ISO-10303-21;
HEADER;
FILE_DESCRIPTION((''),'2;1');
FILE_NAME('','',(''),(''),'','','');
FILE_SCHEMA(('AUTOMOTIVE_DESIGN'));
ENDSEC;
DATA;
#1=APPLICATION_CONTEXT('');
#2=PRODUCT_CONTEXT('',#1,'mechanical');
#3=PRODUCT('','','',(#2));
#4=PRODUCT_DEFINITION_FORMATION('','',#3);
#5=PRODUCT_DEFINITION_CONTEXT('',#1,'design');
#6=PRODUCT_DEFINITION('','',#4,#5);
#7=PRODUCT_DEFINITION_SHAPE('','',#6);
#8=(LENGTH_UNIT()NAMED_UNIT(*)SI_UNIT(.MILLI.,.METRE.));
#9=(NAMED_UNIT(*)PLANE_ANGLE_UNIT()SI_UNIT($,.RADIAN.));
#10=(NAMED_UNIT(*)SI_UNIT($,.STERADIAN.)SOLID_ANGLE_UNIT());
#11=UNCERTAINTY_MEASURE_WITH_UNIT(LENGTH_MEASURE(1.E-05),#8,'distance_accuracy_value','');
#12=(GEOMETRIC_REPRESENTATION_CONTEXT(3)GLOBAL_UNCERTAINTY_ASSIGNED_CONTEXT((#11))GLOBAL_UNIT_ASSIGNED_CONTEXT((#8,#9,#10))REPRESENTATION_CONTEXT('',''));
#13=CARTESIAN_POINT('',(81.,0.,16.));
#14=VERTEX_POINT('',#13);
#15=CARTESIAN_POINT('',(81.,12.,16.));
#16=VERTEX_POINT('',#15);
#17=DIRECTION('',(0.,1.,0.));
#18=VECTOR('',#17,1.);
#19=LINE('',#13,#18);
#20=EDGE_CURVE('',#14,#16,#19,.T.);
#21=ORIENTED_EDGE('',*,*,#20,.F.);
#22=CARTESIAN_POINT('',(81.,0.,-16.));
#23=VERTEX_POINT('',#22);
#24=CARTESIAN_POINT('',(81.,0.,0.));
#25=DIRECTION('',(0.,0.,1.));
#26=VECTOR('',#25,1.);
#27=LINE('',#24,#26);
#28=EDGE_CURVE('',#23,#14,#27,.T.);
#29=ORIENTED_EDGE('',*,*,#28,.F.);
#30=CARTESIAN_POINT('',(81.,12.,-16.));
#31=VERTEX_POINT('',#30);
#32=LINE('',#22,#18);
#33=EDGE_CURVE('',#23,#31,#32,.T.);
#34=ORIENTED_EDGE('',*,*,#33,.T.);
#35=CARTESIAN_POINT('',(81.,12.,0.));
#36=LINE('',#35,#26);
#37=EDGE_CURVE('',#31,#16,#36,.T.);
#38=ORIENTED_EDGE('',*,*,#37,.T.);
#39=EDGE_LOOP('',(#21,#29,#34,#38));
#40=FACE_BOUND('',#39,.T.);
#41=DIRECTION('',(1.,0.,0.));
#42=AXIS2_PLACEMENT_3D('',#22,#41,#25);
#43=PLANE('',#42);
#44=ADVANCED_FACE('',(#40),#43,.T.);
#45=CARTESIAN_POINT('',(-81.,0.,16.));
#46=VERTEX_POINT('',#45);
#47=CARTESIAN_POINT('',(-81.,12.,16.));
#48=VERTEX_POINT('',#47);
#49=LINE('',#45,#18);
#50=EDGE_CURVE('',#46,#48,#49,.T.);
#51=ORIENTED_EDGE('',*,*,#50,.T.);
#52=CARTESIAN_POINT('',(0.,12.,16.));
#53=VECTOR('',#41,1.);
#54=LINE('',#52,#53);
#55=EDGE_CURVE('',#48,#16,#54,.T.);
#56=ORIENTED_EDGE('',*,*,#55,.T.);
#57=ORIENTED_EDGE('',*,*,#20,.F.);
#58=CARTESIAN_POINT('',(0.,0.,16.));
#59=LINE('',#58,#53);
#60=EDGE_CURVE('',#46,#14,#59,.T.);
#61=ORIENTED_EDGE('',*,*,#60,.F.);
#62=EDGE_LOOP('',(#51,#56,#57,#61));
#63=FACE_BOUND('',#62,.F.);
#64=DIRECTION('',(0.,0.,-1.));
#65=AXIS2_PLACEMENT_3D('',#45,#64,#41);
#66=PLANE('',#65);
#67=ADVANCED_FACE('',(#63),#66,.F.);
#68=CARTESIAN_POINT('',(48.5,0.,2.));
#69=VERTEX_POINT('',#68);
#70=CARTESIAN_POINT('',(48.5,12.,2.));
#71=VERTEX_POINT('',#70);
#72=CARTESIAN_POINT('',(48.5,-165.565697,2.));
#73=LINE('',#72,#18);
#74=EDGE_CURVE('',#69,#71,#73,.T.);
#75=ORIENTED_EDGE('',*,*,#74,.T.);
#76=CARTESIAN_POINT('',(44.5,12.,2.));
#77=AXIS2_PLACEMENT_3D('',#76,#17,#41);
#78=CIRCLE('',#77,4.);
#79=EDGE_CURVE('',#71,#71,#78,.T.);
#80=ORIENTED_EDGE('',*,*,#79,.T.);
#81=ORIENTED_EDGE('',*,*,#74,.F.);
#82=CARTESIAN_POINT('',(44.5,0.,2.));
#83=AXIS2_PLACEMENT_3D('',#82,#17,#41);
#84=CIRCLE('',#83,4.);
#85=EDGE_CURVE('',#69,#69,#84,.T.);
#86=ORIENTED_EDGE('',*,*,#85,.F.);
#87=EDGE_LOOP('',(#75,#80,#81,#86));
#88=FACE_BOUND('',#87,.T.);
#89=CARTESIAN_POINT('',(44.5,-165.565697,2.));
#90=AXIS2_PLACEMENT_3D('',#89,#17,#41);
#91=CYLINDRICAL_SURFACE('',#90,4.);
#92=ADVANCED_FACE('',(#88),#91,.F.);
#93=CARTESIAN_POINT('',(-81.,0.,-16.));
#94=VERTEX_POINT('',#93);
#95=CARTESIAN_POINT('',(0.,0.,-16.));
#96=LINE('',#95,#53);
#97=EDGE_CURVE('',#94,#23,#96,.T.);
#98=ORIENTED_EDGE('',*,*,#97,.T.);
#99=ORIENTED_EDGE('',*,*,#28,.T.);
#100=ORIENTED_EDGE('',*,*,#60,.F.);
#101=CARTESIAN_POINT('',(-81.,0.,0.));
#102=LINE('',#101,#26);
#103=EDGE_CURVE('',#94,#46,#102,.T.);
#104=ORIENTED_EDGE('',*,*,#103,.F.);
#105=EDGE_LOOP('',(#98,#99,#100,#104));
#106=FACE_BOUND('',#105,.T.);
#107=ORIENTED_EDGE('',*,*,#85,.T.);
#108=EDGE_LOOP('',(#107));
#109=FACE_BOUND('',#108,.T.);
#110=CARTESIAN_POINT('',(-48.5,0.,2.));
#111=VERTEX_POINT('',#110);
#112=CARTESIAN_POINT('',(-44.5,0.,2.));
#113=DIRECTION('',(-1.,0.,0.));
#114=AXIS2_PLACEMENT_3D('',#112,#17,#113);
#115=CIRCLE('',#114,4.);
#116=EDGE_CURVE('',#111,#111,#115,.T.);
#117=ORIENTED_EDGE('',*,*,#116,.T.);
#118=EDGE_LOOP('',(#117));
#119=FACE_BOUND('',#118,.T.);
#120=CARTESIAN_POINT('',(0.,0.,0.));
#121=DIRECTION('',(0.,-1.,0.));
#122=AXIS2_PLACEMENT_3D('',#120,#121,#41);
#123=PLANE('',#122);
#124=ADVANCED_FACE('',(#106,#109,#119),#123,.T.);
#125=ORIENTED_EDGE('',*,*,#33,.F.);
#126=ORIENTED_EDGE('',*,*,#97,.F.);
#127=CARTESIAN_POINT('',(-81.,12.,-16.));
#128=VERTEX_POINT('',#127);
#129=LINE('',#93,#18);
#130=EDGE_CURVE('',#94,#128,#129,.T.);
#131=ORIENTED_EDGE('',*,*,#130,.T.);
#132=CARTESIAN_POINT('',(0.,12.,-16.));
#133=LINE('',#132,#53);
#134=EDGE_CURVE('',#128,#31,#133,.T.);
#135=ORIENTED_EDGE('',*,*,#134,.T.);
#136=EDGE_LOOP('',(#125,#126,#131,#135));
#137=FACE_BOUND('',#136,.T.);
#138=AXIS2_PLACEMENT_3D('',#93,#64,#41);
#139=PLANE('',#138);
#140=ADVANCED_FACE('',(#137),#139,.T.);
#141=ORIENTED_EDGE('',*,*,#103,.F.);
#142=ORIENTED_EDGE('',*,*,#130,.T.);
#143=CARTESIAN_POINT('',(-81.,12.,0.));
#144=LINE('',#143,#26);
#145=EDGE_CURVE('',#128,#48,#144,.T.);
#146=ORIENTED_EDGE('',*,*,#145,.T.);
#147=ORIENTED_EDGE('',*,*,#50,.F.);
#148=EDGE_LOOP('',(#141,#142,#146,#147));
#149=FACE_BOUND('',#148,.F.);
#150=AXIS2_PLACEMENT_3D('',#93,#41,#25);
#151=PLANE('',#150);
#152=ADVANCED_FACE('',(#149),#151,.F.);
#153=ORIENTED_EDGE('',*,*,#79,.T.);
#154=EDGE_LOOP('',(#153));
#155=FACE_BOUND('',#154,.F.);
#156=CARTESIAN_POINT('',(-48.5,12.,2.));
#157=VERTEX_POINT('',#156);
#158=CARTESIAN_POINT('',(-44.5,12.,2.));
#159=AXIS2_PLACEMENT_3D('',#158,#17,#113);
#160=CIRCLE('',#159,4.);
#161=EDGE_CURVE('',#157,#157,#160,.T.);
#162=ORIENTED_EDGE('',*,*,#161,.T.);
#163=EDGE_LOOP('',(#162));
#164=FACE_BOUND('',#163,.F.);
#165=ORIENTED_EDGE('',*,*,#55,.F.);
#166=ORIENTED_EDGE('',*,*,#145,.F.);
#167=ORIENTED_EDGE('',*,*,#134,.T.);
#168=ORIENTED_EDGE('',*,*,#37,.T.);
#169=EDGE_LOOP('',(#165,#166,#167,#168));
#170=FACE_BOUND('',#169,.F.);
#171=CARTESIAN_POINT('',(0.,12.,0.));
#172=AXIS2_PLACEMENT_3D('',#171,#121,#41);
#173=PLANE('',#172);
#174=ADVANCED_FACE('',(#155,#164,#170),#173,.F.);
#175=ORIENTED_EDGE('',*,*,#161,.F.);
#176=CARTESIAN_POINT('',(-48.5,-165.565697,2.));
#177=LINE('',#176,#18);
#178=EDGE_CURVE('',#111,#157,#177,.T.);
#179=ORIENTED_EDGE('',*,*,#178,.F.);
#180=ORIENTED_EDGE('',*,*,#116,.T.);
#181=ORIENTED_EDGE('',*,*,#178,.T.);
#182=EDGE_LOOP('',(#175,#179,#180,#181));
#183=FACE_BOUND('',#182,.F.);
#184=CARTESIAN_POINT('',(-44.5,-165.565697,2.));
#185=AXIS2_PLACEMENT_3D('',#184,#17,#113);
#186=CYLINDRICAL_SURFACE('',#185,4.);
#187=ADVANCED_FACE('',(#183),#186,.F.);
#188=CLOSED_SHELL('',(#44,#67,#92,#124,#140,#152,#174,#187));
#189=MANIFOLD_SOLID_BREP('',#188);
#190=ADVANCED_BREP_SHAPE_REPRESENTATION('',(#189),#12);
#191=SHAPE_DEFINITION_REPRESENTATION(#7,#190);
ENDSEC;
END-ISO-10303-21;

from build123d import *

# Parameters (mm, degrees)
F0_W     = 162
F0_H     = 32
F1_DEPTH = 12
F3_D     = 8


# Not quite as in the source:
# - a pattern or mirror of a feature is missing from the dataset's text; its kind, count and spacing are read off the source's solid


with BuildPart() as f1:
    # F0 (on Front) → F1 (new body)
    with BuildSketch(Plane.XZ):
        Rectangle(F0_W, F0_H)
    extrude(amount=-F1_DEPTH)

    # F3 (through all)
    with Locations(Plane.XZ):
        with Locations((-44.5, 2)):
            f3 = Hole(F3_D / 2)

    # F3_copies: F3 across plane
    add(f3.mirror(Plane(origin=(0, 0, 0), x_dir=(0, 0, 1), z_dir=(1, 0, 0))), mode=Mode.SUBTRACT)


solid = f1.part
